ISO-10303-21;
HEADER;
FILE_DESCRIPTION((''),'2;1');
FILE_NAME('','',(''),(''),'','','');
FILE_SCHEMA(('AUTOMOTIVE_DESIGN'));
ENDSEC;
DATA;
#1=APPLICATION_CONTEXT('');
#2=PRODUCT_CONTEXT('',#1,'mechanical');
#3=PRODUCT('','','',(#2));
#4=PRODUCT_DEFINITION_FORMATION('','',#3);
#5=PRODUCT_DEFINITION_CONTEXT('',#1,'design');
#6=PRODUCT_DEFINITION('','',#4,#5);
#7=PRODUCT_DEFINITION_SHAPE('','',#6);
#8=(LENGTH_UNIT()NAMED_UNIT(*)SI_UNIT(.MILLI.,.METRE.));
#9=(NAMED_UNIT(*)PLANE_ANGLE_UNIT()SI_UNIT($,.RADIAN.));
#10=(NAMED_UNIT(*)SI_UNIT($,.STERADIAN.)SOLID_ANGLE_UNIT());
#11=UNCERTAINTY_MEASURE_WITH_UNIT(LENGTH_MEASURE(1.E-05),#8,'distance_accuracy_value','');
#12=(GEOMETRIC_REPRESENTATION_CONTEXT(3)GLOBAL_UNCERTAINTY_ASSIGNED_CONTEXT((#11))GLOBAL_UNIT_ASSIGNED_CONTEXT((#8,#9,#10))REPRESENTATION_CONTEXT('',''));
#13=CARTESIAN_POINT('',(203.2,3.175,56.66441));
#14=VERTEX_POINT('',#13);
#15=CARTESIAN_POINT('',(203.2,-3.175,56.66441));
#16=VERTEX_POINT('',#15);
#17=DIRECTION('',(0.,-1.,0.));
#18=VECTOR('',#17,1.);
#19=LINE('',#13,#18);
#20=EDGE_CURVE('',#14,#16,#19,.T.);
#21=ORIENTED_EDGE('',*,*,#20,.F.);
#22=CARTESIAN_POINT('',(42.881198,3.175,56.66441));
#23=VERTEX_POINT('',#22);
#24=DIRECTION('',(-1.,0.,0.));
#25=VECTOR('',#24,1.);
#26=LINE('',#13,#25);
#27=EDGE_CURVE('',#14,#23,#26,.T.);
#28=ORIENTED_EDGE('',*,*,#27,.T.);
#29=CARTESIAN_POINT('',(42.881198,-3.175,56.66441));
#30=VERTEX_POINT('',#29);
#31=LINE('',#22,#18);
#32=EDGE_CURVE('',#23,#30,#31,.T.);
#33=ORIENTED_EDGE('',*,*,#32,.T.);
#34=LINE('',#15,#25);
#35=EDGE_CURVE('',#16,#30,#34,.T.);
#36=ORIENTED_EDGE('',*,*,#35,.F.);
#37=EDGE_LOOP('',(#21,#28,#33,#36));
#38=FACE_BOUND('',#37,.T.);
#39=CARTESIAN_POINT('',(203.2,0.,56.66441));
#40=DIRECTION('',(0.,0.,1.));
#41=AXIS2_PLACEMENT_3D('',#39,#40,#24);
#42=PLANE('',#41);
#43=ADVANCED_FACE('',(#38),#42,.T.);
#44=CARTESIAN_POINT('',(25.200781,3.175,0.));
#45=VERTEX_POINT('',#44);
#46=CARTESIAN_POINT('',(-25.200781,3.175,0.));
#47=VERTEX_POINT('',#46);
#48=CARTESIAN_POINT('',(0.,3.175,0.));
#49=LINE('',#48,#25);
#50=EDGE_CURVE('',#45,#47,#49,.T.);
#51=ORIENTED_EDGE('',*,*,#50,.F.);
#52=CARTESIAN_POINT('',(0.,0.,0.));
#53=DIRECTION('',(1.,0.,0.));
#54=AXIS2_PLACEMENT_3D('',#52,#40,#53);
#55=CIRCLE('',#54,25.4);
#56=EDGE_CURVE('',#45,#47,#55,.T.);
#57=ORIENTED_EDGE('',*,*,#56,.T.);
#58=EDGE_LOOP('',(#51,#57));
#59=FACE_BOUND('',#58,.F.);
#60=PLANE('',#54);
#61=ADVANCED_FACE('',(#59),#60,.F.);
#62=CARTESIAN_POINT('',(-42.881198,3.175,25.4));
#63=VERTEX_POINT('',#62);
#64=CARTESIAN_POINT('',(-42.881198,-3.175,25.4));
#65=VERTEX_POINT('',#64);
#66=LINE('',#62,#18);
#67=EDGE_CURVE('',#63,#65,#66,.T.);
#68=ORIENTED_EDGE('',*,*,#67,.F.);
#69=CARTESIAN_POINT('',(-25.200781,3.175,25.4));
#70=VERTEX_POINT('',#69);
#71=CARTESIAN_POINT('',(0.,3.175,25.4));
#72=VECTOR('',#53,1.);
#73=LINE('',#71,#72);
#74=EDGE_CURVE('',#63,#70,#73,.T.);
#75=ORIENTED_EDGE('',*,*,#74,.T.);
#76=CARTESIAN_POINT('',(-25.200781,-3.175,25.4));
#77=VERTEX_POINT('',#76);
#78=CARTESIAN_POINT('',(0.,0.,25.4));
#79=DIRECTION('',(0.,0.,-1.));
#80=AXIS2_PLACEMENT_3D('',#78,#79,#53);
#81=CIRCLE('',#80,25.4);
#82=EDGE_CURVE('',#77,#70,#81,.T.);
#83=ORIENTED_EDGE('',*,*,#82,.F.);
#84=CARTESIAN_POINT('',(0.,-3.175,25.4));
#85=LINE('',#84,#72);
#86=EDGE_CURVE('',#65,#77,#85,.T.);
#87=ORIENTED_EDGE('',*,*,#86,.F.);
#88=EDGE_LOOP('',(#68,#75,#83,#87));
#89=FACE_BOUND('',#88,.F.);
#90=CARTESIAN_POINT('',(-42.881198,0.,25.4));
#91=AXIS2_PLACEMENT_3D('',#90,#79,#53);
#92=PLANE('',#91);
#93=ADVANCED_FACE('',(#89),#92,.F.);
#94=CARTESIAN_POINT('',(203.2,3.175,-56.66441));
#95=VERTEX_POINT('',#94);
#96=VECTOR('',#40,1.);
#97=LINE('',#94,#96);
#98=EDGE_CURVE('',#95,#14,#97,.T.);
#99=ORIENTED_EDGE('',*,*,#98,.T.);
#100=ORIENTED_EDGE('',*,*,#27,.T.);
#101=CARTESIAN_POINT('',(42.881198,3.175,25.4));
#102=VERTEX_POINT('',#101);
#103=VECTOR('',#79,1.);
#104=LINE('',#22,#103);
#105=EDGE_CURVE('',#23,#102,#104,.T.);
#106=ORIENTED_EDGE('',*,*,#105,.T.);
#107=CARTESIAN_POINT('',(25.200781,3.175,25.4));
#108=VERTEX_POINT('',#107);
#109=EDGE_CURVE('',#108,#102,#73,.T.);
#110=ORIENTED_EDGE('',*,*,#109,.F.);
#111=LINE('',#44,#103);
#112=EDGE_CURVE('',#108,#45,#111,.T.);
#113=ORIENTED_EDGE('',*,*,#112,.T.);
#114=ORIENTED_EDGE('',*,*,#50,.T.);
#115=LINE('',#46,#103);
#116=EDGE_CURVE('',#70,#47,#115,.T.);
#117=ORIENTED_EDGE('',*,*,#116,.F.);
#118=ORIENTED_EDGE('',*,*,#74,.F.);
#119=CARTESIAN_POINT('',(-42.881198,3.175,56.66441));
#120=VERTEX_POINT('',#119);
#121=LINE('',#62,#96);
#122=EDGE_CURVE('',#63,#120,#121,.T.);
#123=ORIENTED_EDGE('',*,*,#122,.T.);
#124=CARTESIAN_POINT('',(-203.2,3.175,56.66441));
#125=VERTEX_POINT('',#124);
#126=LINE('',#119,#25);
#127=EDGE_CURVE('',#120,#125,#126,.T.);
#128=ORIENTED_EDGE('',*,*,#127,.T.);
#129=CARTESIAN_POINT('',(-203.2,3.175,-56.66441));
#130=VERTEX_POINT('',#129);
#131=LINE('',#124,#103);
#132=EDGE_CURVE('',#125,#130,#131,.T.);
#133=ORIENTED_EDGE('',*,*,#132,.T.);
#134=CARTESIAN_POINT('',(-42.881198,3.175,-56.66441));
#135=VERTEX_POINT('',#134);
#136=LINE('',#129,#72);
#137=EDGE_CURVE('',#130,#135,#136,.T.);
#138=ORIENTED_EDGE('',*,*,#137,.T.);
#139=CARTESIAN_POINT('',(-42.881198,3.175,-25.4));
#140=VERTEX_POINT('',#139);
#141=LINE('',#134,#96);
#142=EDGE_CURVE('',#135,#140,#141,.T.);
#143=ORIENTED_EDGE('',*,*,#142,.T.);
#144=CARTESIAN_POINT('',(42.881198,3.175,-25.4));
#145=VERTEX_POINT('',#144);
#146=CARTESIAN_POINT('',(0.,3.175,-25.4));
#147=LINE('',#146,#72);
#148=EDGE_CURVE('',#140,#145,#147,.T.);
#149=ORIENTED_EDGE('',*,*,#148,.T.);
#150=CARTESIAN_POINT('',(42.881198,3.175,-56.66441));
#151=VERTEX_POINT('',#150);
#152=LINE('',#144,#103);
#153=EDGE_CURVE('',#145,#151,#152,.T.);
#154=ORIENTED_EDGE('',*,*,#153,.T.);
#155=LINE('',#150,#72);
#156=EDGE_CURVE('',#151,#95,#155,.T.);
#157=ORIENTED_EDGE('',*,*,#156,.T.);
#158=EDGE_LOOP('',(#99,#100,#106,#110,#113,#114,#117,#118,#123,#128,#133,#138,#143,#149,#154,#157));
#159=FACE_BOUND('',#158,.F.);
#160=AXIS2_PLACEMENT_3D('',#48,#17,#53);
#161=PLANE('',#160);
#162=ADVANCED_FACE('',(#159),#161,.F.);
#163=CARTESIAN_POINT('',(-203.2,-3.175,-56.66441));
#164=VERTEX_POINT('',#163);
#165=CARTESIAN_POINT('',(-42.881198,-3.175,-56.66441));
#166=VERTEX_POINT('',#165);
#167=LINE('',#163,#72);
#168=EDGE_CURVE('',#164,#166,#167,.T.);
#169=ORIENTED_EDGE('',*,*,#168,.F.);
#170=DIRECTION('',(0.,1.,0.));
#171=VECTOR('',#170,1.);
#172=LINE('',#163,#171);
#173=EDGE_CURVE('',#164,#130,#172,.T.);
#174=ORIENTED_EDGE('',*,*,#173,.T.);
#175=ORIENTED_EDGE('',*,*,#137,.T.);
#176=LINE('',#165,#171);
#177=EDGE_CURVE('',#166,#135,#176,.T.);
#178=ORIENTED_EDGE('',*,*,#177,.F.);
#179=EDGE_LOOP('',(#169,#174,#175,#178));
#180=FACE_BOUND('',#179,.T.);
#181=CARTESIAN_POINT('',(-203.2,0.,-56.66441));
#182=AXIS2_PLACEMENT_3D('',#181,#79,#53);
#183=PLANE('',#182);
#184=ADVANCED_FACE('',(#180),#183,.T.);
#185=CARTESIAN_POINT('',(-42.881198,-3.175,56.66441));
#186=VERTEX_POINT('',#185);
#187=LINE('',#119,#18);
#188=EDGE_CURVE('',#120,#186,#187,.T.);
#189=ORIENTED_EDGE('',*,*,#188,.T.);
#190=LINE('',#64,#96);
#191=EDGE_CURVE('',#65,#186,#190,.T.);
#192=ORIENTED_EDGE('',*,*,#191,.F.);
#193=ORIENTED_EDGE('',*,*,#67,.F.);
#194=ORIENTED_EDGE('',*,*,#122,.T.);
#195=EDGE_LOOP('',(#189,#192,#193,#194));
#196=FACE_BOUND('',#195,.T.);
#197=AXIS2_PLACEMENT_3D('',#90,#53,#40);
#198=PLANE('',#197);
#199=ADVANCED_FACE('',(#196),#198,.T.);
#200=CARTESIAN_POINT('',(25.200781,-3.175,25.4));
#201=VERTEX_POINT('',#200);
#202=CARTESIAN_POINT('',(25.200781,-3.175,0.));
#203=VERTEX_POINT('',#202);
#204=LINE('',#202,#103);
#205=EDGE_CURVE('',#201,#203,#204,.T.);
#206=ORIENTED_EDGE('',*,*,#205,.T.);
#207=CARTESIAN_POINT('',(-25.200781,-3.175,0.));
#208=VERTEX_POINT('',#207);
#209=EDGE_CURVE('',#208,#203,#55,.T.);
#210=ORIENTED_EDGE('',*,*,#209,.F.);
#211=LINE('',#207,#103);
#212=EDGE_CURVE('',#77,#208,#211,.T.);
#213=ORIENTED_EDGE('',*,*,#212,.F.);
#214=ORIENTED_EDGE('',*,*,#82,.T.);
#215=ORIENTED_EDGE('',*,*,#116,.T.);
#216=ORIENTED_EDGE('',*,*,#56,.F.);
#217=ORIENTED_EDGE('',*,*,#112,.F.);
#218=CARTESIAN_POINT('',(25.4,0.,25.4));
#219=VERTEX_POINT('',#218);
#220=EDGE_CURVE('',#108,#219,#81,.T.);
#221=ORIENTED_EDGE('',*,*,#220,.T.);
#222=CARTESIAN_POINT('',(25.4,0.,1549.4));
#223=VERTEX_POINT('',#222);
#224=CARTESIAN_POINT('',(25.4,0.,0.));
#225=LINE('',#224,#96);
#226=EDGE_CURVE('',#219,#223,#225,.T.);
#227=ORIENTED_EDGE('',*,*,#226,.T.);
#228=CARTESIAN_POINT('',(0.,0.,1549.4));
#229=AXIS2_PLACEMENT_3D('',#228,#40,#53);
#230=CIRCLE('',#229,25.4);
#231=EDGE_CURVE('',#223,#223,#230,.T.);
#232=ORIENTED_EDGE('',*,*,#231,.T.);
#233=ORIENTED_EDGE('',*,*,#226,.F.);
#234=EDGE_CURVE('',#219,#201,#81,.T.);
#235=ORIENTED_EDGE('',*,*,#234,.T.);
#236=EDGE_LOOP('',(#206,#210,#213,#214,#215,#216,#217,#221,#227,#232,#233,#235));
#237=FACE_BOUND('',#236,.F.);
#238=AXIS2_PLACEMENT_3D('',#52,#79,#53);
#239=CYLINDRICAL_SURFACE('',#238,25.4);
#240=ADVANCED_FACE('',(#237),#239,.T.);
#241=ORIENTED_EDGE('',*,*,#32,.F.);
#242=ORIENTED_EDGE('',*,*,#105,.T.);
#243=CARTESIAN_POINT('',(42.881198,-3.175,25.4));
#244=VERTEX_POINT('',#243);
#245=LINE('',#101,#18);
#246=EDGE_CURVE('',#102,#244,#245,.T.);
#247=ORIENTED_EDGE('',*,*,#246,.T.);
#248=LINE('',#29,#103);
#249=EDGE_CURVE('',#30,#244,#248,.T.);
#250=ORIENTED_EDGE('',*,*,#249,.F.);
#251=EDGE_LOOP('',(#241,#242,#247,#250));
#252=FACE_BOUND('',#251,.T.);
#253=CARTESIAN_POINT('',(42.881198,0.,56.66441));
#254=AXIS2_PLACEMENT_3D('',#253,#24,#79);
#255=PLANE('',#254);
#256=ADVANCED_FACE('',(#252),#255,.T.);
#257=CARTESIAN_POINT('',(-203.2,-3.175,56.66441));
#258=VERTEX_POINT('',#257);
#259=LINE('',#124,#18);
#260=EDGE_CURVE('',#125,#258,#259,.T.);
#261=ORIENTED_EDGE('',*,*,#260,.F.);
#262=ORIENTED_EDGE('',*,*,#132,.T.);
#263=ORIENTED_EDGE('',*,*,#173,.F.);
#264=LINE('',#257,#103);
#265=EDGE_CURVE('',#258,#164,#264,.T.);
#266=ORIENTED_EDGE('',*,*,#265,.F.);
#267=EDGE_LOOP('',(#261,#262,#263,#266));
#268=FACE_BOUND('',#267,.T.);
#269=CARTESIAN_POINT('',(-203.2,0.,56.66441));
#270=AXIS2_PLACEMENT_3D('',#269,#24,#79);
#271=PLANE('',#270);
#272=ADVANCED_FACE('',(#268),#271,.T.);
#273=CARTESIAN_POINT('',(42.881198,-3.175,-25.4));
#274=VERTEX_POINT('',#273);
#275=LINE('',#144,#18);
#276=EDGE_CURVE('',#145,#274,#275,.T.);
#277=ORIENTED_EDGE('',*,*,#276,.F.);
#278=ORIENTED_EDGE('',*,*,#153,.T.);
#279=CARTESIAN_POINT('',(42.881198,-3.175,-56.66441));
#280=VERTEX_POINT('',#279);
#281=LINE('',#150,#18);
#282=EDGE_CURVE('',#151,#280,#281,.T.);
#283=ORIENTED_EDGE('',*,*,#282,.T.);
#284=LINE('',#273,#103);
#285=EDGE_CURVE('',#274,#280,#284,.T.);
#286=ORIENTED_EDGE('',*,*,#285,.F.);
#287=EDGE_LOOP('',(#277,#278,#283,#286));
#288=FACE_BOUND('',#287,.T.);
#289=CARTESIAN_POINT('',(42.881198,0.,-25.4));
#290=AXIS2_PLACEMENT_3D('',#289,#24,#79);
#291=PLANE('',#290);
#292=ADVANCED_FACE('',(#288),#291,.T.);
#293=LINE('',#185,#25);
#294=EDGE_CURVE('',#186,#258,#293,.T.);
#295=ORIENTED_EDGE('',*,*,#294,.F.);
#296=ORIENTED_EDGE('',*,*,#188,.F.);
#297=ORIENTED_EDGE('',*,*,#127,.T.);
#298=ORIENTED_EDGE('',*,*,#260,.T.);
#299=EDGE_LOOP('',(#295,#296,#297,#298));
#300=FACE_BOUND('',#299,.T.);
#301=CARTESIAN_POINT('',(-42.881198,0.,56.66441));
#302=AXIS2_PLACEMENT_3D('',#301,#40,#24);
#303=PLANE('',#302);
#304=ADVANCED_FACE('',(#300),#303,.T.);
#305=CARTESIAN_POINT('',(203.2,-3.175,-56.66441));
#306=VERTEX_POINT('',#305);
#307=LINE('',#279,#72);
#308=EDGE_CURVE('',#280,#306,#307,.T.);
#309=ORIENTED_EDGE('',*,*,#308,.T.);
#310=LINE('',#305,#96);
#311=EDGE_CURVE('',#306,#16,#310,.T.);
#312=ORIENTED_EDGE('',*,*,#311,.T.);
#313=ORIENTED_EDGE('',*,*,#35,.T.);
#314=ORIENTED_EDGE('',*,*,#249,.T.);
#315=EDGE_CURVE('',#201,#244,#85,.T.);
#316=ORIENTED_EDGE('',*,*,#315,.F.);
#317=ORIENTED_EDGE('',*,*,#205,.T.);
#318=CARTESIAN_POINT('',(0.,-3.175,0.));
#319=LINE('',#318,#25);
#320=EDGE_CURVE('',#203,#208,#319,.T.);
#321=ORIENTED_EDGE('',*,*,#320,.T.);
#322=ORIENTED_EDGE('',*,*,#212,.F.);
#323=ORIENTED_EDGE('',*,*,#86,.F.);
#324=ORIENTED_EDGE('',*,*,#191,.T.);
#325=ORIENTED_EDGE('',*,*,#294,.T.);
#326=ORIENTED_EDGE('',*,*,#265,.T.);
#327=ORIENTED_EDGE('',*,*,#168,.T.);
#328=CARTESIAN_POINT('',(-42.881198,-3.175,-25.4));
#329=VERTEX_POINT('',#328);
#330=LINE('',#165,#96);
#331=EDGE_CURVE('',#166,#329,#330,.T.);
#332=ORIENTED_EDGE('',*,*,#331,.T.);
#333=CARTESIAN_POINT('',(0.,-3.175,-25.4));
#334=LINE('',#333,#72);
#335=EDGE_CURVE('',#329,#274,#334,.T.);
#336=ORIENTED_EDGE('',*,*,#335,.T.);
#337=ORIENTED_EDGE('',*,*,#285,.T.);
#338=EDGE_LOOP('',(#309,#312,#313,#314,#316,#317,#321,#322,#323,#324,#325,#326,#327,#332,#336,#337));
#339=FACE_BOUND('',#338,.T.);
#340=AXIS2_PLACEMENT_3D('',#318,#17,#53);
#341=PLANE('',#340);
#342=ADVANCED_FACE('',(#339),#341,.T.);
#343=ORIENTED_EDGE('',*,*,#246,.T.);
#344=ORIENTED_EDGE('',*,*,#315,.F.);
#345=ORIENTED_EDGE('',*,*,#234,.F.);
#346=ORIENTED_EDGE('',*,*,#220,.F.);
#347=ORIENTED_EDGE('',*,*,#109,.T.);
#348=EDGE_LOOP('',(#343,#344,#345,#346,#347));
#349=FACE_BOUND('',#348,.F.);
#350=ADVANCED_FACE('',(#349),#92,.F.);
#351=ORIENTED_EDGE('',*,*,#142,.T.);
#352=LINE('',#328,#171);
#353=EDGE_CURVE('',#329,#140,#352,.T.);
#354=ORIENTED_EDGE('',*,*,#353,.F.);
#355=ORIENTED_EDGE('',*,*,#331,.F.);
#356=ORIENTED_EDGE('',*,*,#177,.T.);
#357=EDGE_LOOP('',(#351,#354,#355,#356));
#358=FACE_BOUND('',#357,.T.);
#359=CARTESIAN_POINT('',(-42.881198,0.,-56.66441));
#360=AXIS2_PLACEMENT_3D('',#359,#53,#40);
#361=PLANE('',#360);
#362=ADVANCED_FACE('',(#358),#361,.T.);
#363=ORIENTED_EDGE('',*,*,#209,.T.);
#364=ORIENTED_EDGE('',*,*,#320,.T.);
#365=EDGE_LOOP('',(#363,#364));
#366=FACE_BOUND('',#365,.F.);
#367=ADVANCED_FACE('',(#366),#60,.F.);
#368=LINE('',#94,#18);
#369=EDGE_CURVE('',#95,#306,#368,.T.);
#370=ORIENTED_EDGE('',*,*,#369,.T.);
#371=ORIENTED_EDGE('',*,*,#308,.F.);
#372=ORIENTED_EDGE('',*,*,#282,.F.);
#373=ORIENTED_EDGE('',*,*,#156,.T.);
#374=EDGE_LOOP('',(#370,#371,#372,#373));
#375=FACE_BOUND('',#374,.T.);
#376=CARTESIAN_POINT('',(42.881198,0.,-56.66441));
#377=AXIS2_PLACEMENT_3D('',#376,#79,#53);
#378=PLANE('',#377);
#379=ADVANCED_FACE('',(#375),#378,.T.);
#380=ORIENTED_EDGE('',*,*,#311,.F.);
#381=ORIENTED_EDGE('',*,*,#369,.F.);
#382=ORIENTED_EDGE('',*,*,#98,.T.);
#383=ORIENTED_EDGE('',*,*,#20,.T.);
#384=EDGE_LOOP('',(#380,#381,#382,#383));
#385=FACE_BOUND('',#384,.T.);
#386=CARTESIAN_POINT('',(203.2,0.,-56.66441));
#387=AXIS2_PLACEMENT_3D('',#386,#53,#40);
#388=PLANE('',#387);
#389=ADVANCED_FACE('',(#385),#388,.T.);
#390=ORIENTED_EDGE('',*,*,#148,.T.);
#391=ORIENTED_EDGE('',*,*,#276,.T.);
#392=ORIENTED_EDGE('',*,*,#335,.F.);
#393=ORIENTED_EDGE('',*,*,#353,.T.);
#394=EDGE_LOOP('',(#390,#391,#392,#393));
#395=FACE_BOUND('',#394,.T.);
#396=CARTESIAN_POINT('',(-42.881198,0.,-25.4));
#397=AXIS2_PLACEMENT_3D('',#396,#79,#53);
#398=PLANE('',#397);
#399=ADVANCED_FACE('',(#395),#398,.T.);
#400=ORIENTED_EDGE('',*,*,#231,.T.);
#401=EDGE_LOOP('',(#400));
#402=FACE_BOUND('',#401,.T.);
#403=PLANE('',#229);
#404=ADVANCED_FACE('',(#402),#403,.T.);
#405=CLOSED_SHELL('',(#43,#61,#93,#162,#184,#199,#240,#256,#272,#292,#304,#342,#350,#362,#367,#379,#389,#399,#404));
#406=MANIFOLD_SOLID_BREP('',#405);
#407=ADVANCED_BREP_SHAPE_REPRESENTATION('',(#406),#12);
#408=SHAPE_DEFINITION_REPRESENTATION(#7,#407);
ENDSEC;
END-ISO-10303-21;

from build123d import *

# Parameters (mm, degrees)
F0_W     = 85.7623966645
F0_H     = 50.8
F2_DEPTH = 3.175
F1_R     = 25.4
F4_DEPTH = 1549.4


# Not quite as in the source:
# - the program builds the solid bodies; features that only make, move or delete a surface that nothing else refers to are left out


with BuildPart() as f2:
    # F0 (on Front) → F2 (new body, symmetric)
    with BuildSketch(Plane.XZ):
        Rectangle(F0_W, F0_H)
        Polygon((42.8811983322, 56.6644097805), (42.8811983322, 25.4), (42.8811983322, -25.4), (42.8811983322, -56.6644097805), (203.2, -56.6644097805), (203.2, 56.6644097805), align=None)
        Polygon((-42.8811983322, -25.4), (-42.8811983322, 25.4), (-42.8811983322, 56.6644097805), (-203.2, 56.6644097805), (-203.2, -56.6644097805), (-42.8811983322, -56.6644097805), align=None)
    extrude(amount=F2_DEPTH, both=True)

    # F1 (on Top) → F4 (join)
    with BuildSketch(Plane.XY):
        Circle(F1_R)
    extrude(amount=F4_DEPTH)


solid = f2.part
